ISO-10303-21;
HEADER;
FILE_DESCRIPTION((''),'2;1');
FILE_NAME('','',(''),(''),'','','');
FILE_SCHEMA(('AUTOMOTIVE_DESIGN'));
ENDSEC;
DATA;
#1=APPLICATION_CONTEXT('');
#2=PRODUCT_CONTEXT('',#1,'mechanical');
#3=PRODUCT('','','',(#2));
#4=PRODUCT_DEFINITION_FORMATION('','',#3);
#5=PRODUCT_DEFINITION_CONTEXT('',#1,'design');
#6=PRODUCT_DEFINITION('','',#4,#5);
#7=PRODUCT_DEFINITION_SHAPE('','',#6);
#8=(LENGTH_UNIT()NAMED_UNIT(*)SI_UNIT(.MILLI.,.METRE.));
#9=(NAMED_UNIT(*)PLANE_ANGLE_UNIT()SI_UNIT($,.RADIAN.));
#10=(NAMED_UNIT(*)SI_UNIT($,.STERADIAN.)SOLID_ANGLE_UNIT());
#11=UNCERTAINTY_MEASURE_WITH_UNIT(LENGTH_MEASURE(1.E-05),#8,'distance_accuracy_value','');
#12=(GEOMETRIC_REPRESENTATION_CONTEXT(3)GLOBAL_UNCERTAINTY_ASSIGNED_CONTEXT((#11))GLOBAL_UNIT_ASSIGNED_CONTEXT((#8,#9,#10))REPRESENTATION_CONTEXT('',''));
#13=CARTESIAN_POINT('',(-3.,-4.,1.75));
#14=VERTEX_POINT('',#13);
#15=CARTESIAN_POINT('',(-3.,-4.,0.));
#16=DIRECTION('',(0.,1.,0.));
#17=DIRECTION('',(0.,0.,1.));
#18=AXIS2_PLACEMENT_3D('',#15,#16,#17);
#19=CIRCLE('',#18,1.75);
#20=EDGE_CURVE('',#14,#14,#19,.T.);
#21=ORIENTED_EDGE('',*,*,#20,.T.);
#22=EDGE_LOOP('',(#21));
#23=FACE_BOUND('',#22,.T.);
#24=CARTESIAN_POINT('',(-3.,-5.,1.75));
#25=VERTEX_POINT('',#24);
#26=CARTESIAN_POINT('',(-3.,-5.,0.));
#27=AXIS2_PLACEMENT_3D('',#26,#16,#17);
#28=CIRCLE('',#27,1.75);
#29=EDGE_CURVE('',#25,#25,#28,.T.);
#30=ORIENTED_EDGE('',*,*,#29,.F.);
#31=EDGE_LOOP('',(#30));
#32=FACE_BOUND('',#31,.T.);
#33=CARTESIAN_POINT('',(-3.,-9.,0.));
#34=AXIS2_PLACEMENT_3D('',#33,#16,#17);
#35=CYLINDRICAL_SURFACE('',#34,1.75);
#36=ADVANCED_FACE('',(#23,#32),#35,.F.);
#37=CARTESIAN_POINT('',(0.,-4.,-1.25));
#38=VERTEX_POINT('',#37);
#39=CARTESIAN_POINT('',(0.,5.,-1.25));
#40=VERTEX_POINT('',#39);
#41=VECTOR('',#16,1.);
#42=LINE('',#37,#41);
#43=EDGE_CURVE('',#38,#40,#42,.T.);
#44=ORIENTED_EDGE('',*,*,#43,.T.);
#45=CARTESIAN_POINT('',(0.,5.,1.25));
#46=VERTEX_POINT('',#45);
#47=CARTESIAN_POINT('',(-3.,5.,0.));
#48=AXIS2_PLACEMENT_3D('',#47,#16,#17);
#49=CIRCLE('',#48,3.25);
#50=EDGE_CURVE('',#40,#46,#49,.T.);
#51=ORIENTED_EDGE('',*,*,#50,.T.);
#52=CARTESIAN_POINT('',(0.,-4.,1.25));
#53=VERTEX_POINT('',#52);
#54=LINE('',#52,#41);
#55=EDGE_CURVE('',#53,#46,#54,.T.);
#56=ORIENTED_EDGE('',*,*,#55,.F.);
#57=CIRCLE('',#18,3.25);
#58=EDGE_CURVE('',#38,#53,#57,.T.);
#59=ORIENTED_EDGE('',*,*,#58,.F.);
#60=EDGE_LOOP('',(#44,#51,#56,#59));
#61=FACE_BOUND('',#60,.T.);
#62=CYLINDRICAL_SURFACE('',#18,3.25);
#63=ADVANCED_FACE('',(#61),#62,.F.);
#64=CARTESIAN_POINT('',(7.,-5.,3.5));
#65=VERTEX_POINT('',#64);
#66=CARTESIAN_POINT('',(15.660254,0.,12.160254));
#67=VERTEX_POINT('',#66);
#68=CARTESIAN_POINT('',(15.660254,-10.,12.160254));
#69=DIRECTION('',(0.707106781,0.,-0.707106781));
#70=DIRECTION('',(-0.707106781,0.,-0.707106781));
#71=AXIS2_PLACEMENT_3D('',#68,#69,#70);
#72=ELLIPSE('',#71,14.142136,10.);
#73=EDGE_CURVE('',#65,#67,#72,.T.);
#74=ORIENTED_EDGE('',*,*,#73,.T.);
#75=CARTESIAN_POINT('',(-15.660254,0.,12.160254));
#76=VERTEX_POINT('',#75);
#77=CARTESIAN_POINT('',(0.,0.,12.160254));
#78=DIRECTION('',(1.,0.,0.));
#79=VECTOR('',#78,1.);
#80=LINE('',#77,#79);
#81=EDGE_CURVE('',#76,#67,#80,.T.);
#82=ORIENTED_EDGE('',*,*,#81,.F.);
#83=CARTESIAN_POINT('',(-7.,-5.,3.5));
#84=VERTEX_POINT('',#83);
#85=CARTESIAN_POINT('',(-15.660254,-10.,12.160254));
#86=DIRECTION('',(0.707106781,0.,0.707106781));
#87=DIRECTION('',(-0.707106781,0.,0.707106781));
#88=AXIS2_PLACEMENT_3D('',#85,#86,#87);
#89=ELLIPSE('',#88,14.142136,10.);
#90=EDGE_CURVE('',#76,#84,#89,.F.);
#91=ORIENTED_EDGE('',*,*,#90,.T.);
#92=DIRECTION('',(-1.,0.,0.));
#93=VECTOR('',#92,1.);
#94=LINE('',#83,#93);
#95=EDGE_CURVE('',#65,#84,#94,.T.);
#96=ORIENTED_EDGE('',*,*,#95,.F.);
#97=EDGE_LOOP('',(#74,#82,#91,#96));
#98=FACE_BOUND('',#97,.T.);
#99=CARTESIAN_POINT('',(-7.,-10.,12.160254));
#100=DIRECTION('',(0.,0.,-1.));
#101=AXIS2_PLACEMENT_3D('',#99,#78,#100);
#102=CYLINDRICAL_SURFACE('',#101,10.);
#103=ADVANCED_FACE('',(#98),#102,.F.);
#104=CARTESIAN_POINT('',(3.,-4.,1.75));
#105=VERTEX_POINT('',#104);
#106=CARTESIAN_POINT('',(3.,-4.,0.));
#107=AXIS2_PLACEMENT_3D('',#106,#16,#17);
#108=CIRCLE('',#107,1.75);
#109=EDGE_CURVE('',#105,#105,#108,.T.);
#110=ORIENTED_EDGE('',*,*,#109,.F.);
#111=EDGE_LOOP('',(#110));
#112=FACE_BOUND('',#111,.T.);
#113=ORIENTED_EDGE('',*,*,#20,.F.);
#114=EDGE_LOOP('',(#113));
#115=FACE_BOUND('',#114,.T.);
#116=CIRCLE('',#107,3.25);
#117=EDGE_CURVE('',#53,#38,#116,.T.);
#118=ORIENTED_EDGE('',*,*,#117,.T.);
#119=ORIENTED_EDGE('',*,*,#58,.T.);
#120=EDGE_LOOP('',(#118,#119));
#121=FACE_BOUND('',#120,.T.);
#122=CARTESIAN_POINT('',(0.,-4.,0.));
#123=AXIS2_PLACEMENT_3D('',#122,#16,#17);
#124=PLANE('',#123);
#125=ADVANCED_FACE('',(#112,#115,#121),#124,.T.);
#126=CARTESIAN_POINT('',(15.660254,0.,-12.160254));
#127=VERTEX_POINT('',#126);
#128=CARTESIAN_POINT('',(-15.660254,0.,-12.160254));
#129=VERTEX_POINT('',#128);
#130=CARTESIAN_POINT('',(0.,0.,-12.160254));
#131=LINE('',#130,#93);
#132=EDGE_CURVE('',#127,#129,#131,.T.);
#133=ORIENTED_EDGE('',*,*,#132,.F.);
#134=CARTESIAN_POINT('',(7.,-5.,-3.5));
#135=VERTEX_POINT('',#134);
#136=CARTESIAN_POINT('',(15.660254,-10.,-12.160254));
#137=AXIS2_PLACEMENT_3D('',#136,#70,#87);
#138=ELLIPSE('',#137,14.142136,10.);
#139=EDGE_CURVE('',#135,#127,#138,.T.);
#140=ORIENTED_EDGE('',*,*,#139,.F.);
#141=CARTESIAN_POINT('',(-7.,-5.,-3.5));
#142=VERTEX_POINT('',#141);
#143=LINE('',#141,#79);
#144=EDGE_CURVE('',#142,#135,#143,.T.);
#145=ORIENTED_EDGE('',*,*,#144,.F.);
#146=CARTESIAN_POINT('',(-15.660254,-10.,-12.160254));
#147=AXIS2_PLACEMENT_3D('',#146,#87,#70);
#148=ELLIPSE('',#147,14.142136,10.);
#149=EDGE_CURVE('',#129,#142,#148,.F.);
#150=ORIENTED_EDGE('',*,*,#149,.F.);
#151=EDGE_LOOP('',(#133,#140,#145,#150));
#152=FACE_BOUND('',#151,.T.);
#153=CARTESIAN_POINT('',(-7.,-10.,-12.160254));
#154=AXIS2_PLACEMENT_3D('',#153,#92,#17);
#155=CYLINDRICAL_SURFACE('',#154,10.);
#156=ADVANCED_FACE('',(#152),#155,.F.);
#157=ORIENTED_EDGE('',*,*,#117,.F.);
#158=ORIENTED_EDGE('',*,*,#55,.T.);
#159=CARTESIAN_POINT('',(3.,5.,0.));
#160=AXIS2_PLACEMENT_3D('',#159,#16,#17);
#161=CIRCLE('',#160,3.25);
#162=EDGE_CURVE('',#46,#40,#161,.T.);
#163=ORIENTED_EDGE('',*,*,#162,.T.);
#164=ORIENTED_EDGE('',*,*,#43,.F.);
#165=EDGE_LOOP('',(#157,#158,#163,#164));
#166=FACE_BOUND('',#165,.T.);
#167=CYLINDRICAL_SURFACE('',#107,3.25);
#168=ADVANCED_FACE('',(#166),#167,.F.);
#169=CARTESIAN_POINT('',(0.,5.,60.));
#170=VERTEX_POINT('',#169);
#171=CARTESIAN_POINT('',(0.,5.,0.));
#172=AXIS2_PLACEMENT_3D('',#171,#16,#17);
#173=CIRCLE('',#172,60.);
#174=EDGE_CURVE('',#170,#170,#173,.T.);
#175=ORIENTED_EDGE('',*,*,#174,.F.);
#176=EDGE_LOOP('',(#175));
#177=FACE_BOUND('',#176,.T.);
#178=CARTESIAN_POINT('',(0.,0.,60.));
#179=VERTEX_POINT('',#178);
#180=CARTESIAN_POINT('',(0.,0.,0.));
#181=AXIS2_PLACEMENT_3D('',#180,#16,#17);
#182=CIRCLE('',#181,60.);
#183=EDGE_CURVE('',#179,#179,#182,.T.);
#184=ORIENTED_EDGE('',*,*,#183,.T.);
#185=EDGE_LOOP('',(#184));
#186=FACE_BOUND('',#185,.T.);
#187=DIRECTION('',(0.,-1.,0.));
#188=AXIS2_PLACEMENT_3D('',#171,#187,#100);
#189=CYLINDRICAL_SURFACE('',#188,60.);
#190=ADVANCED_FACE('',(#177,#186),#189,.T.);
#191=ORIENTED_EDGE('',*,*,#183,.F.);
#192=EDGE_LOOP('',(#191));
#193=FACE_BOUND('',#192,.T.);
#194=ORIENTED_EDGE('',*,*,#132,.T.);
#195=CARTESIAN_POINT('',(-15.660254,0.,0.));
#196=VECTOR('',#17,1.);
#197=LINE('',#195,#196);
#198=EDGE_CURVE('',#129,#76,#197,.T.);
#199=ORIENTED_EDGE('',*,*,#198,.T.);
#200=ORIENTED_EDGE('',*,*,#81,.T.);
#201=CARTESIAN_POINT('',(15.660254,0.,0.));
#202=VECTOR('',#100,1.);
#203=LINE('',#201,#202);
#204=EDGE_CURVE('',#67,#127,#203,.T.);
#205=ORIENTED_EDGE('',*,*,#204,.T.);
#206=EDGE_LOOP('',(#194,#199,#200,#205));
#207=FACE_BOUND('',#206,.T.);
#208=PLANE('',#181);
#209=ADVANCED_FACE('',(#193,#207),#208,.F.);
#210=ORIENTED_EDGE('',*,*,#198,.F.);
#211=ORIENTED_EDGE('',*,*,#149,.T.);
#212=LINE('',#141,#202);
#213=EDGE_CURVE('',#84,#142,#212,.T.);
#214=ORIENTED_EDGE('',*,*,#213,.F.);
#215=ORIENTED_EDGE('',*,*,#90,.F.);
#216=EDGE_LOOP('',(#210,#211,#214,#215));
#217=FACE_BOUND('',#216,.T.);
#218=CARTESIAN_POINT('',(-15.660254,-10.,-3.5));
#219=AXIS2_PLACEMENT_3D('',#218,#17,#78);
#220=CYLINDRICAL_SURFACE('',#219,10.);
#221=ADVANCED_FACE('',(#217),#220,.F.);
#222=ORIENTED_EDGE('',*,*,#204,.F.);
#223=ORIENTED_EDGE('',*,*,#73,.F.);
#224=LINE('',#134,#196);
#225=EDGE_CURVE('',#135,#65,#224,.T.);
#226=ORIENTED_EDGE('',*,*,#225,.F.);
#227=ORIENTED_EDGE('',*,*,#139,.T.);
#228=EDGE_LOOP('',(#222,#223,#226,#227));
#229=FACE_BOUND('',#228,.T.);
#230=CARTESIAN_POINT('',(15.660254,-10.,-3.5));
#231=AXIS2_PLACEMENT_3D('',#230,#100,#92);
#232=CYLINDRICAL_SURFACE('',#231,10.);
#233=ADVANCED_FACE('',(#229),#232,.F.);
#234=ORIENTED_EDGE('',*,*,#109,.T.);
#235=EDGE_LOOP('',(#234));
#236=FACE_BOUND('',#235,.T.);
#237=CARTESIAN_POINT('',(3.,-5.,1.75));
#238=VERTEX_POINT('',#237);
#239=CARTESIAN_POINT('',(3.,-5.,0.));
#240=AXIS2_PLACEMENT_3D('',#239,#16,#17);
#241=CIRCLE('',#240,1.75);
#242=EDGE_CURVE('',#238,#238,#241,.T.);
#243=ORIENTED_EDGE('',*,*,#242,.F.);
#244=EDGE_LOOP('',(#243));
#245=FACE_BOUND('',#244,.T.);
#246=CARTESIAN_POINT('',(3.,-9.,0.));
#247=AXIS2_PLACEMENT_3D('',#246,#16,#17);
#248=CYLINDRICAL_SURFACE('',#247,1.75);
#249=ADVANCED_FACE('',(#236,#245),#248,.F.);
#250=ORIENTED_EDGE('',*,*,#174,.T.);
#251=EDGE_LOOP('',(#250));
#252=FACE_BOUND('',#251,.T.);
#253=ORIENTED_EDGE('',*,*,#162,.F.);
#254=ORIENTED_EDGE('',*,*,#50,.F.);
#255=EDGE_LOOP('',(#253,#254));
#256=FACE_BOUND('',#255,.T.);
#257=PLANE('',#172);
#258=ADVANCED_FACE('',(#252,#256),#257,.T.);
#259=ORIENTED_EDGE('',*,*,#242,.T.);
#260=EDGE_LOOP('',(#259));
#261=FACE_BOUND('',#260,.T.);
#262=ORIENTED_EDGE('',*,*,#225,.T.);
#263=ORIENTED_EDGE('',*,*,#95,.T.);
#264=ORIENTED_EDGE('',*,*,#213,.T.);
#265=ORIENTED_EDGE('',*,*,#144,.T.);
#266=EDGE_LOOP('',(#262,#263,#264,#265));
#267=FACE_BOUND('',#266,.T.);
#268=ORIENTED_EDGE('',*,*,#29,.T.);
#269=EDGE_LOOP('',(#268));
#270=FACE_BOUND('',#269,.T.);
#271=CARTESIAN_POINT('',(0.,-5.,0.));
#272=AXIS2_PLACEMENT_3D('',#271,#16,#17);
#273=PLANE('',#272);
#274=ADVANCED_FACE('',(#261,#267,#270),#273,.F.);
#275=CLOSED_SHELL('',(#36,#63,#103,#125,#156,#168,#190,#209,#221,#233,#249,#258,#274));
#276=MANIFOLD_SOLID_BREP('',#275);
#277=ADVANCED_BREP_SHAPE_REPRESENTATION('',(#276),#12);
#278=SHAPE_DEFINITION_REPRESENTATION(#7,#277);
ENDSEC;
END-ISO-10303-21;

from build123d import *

# Parameters (mm, degrees)
SKETCH1_R           = 60
BOSS_EXTRUDE1_DEPTH = 5
SKETCH3_W           = 14
SKETCH3_H           = 7
BOSS_EXTRUDE2_DEPTH = 5
SKETCH4_R           = 3.25
CUT_EXTRUDE1_DEPTH  = 9
SKETCH7_R           = 1.75
CUT_EXTRUDE2_DEPTH  = 5
FILLET1_R           = 10


with BuildPart() as part:
    # Sketch1 → Boss-Extrude1 (new body)
    with BuildSketch(Plane(origin=(0, 0, 0), x_dir=(1, 0, 0), z_dir=(0, 1, 0))):
        with Locations(Location((0, 0, 0), (0, 0, 270))):
            Circle(SKETCH1_R)
    extrude(amount=BOSS_EXTRUDE1_DEPTH)

    # Sketch3 → Boss-Extrude2 (add)
    with BuildSketch(Plane.XZ):
        Rectangle(SKETCH3_W, SKETCH3_H)
    extrude(amount=BOSS_EXTRUDE2_DEPTH)

    # Sketch4 → Cut-Extrude1 (cut)
    with BuildSketch(Plane(origin=(0, 5, 0), x_dir=(1, 0, 0), z_dir=(0, 1, 0))):
        with Locations((3, 0)):
            Circle(SKETCH4_R)
        with Locations((-3, 0)):
            Circle(SKETCH4_R)
    extrude(amount=-CUT_EXTRUDE1_DEPTH, mode=Mode.SUBTRACT)

    # Sketch7 → Cut-Extrude2 (cut)
    with BuildSketch(Plane(origin=(0, -4, 0), x_dir=(1, 0, 0), z_dir=(0, 1, 0))):
        with Locations(Location((-3, 0, 0), (0, 0, 270))):
            Circle(SKETCH7_R)
        with Locations(Location((3, 0, 0), (0, 0, 270))):
            Circle(SKETCH7_R)
    extrude(amount=-CUT_EXTRUDE2_DEPTH, mode=Mode.SUBTRACT)

    # Fillet1
    # the kernel refuses this fillet: 10 mm, written as the material it adds along each edge
    with BuildSketch(Plane(origin=(7, 0, 3.5), x_dir=(0, 0, 1), z_dir=(-1, 0, 0)), Plane(origin=(-7, 0, -3.5), x_dir=(0, 0, -1), z_dir=(1, 0, 0))) as fillet1_piece_1:
        with BuildLine():
            CenterArc((8.660254038, -10), FILLET1_R, 90, 60)
            Line((0, -5), (-0.173205081, -4.9))
            ThreePointArc((-0.173205081, -4.9), (-0.2, -2.5), (-0.2, 0))
            Line((-0.2, 0), (0, 0.2))
            Line((0, 0.2), (8.660254038, 0.2))
            Line((8.660254038, 0.2), (8.660254038, 0))
        make_face()
    extrude(amount=14)
    with BuildSketch(Plane(origin=(7, 0, -3.5), x_dir=(1, 0, 0), z_dir=(0, 0, 1)), Plane(origin=(-7, 0, 3.5), x_dir=(-1, 0, 0), z_dir=(0, 0, -1))) as fillet1_piece_2:
        with BuildLine():
            CenterArc((8.660254038, -10), FILLET1_R, 90, 60)
            Line((0, -5), (-0.173205081, -4.9))
            ThreePointArc((-0.173205081, -4.9), (-0.2, -2.5), (-0.2, 0))
            Line((-0.2, 0), (0, 0.2))
            Line((0, 0.2), (8.660254038, 0.2))
            Line((8.660254038, 0.2), (8.660254038, 0))
        make_face()
    extrude(amount=7)
    with BuildSketch(Plane(origin=(28.650635095, 0, 3.5), x_dir=(0, 0, 1), z_dir=(-1, 0, 0))) as fillet1_piece_3a_section:
        with BuildLine():
            CenterArc((8.660254038, -10), FILLET1_R, 90, 60)
            Line((0, -5), (-0.173205081, -4.9))
            ThreePointArc((-0.173205081, -4.9), (-0.2, -2.5), (-0.2, 0))
            Line((-0.2, 0), (0, 0.2))
            Line((0, 0.2), (8.660254038, 0.2))
            Line((8.660254038, 0.2), (8.660254038, 0))
        make_face()
    fillet1_piece_3a = extrude(amount=35.650635095, mode=Mode.PRIVATE)
    fillet1_piece_3a = split(fillet1_piece_3a, bisect_by=Plane(origin=(7, -1.295167111, 5.663104458), z_dir=(1, 0, 0)), keep=Keep.TOP, mode=Mode.PRIVATE)
    with BuildSketch(Plane(origin=(7, 0, -3.5), x_dir=(1, 0, 0), z_dir=(0, 0, 1))) as fillet1_piece_3b_section:
        with BuildLine():
            CenterArc((8.660254038, -10), FILLET1_R, 90, 60)
            Line((0, -5), (-0.173205081, -4.9))
            ThreePointArc((-0.173205081, -4.9), (-0.2, -2.5), (-0.2, 0))
            Line((-0.2, 0), (0, 0.2))
            Line((0, 0.2), (8.660254038, 0.2))
            Line((8.660254038, 0.2), (8.660254038, 0))
        make_face()
    fillet1_piece_3b = extrude(amount=28.650635095, mode=Mode.PRIVATE)
    fillet1_piece_3b = split(fillet1_piece_3b, bisect_by=Plane(origin=(9.163104458, -1.295167111, 3.5), z_dir=(0, 0, 1)), keep=Keep.TOP, mode=Mode.PRIVATE)
    fillet1_piece_3 = fillet1_piece_3a & fillet1_piece_3b
    add(fillet1_piece_3)
    with BuildSketch(Plane(origin=(-7, 0, 25.150635095), x_dir=(-1, 0, 0), z_dir=(0, 0, -1))) as fillet1_piece_4a_section:
        with BuildLine():
            CenterArc((8.660254038, -10), FILLET1_R, 90, 60)
            Line((0, -5), (-0.173205081, -4.9))
            ThreePointArc((-0.173205081, -4.9), (-0.2, -2.5), (-0.2, 0))
            Line((-0.2, 0), (0, 0.2))
            Line((0, 0.2), (8.660254038, 0.2))
            Line((8.660254038, 0.2), (8.660254038, 0))
        make_face()
    fillet1_piece_4a = extrude(amount=28.650635095, mode=Mode.PRIVATE)
    fillet1_piece_4a = split(fillet1_piece_4a, bisect_by=Plane(origin=(-9.163104458, -1.295167111, 3.5), z_dir=(0, 0, 1)), keep=Keep.TOP, mode=Mode.PRIVATE)
    with BuildSketch(Plane(origin=(7, 0, 3.5), x_dir=(0, 0, 1), z_dir=(-1, 0, 0))) as fillet1_piece_4b_section:
        with BuildLine():
            CenterArc((8.660254038, -10), FILLET1_R, 90, 60)
            Line((0, -5), (-0.173205081, -4.9))
            ThreePointArc((-0.173205081, -4.9), (-0.2, -2.5), (-0.2, 0))
            Line((-0.2, 0), (0, 0.2))
            Line((0, 0.2), (8.660254038, 0.2))
            Line((8.660254038, 0.2), (8.660254038, 0))
        make_face()
    fillet1_piece_4b = extrude(amount=35.650635095, mode=Mode.PRIVATE)
    fillet1_piece_4b = split(fillet1_piece_4b, bisect_by=Plane(origin=(-7, -1.295167111, 5.663104458), z_dir=(-1, 0, 0)), keep=Keep.TOP, mode=Mode.PRIVATE)
    fillet1_piece_4 = fillet1_piece_4a & fillet1_piece_4b
    add(fillet1_piece_4)
    with BuildSketch(Plane(origin=(7, 0, -25.150635095), x_dir=(1, 0, 0), z_dir=(0, 0, 1))) as fillet1_piece_5a_section:
        with BuildLine():
            CenterArc((8.660254038, -10), FILLET1_R, 90, 60)
            Line((0, -5), (-0.173205081, -4.9))
            ThreePointArc((-0.173205081, -4.9), (-0.2, -2.5), (-0.2, 0))
            Line((-0.2, 0), (0, 0.2))
            Line((0, 0.2), (8.660254038, 0.2))
            Line((8.660254038, 0.2), (8.660254038, 0))
        make_face()
    fillet1_piece_5a = extrude(amount=28.650635095, mode=Mode.PRIVATE)
    fillet1_piece_5a = split(fillet1_piece_5a, bisect_by=Plane(origin=(9.163104458, -1.295167111, -3.5), z_dir=(0, 0, -1)), keep=Keep.TOP, mode=Mode.PRIVATE)
    with BuildSketch(Plane(origin=(-7, 0, -3.5), x_dir=(0, 0, -1), z_dir=(1, 0, 0))) as fillet1_piece_5b_section:
        with BuildLine():
            CenterArc((8.660254038, -10), FILLET1_R, 90, 60)
            Line((0, -5), (-0.173205081, -4.9))
            ThreePointArc((-0.173205081, -4.9), (-0.2, -2.5), (-0.2, 0))
            Line((-0.2, 0), (0, 0.2))
            Line((0, 0.2), (8.660254038, 0.2))
            Line((8.660254038, 0.2), (8.660254038, 0))
        make_face()
    fillet1_piece_5b = extrude(amount=35.650635095, mode=Mode.PRIVATE)
    fillet1_piece_5b = split(fillet1_piece_5b, bisect_by=Plane(origin=(7, -1.295167111, -5.663104458), z_dir=(1, 0, 0)), keep=Keep.TOP, mode=Mode.PRIVATE)
    fillet1_piece_5 = fillet1_piece_5a & fillet1_piece_5b
    add(fillet1_piece_5)
    with BuildSketch(Plane(origin=(-7, 0, 3.5), x_dir=(-1, 0, 0), z_dir=(0, 0, -1))) as fillet1_piece_6a_section:
        with BuildLine():
            CenterArc((8.660254038, -10), FILLET1_R, 90, 60)
            Line((0, -5), (-0.173205081, -4.9))
            ThreePointArc((-0.173205081, -4.9), (-0.2, -2.5), (-0.2, 0))
            Line((-0.2, 0), (0, 0.2))
            Line((0, 0.2), (8.660254038, 0.2))
            Line((8.660254038, 0.2), (8.660254038, 0))
        make_face()
    fillet1_piece_6a = extrude(amount=28.650635095, mode=Mode.PRIVATE)
    fillet1_piece_6a = split(fillet1_piece_6a, bisect_by=Plane(origin=(-9.163104458, -1.295167111, -3.5), z_dir=(0, 0, -1)), keep=Keep.TOP, mode=Mode.PRIVATE)
    with BuildSketch(Plane(origin=(-28.650635095, 0, -3.5), x_dir=(0, 0, -1), z_dir=(1, 0, 0))) as fillet1_piece_6b_section:
        with BuildLine():
            CenterArc((8.660254038, -10), FILLET1_R, 90, 60)
            Line((0, -5), (-0.173205081, -4.9))
            ThreePointArc((-0.173205081, -4.9), (-0.2, -2.5), (-0.2, 0))
            Line((-0.2, 0), (0, 0.2))
            Line((0, 0.2), (8.660254038, 0.2))
            Line((8.660254038, 0.2), (8.660254038, 0))
        make_face()
    fillet1_piece_6b = extrude(amount=35.650635095, mode=Mode.PRIVATE)
    fillet1_piece_6b = split(fillet1_piece_6b, bisect_by=Plane(origin=(-7, -1.295167111, -5.663104458), z_dir=(-1, 0, 0)), keep=Keep.TOP, mode=Mode.PRIVATE)
    fillet1_piece_6 = fillet1_piece_6a & fillet1_piece_6b
    add(fillet1_piece_6)


solid = part.part
